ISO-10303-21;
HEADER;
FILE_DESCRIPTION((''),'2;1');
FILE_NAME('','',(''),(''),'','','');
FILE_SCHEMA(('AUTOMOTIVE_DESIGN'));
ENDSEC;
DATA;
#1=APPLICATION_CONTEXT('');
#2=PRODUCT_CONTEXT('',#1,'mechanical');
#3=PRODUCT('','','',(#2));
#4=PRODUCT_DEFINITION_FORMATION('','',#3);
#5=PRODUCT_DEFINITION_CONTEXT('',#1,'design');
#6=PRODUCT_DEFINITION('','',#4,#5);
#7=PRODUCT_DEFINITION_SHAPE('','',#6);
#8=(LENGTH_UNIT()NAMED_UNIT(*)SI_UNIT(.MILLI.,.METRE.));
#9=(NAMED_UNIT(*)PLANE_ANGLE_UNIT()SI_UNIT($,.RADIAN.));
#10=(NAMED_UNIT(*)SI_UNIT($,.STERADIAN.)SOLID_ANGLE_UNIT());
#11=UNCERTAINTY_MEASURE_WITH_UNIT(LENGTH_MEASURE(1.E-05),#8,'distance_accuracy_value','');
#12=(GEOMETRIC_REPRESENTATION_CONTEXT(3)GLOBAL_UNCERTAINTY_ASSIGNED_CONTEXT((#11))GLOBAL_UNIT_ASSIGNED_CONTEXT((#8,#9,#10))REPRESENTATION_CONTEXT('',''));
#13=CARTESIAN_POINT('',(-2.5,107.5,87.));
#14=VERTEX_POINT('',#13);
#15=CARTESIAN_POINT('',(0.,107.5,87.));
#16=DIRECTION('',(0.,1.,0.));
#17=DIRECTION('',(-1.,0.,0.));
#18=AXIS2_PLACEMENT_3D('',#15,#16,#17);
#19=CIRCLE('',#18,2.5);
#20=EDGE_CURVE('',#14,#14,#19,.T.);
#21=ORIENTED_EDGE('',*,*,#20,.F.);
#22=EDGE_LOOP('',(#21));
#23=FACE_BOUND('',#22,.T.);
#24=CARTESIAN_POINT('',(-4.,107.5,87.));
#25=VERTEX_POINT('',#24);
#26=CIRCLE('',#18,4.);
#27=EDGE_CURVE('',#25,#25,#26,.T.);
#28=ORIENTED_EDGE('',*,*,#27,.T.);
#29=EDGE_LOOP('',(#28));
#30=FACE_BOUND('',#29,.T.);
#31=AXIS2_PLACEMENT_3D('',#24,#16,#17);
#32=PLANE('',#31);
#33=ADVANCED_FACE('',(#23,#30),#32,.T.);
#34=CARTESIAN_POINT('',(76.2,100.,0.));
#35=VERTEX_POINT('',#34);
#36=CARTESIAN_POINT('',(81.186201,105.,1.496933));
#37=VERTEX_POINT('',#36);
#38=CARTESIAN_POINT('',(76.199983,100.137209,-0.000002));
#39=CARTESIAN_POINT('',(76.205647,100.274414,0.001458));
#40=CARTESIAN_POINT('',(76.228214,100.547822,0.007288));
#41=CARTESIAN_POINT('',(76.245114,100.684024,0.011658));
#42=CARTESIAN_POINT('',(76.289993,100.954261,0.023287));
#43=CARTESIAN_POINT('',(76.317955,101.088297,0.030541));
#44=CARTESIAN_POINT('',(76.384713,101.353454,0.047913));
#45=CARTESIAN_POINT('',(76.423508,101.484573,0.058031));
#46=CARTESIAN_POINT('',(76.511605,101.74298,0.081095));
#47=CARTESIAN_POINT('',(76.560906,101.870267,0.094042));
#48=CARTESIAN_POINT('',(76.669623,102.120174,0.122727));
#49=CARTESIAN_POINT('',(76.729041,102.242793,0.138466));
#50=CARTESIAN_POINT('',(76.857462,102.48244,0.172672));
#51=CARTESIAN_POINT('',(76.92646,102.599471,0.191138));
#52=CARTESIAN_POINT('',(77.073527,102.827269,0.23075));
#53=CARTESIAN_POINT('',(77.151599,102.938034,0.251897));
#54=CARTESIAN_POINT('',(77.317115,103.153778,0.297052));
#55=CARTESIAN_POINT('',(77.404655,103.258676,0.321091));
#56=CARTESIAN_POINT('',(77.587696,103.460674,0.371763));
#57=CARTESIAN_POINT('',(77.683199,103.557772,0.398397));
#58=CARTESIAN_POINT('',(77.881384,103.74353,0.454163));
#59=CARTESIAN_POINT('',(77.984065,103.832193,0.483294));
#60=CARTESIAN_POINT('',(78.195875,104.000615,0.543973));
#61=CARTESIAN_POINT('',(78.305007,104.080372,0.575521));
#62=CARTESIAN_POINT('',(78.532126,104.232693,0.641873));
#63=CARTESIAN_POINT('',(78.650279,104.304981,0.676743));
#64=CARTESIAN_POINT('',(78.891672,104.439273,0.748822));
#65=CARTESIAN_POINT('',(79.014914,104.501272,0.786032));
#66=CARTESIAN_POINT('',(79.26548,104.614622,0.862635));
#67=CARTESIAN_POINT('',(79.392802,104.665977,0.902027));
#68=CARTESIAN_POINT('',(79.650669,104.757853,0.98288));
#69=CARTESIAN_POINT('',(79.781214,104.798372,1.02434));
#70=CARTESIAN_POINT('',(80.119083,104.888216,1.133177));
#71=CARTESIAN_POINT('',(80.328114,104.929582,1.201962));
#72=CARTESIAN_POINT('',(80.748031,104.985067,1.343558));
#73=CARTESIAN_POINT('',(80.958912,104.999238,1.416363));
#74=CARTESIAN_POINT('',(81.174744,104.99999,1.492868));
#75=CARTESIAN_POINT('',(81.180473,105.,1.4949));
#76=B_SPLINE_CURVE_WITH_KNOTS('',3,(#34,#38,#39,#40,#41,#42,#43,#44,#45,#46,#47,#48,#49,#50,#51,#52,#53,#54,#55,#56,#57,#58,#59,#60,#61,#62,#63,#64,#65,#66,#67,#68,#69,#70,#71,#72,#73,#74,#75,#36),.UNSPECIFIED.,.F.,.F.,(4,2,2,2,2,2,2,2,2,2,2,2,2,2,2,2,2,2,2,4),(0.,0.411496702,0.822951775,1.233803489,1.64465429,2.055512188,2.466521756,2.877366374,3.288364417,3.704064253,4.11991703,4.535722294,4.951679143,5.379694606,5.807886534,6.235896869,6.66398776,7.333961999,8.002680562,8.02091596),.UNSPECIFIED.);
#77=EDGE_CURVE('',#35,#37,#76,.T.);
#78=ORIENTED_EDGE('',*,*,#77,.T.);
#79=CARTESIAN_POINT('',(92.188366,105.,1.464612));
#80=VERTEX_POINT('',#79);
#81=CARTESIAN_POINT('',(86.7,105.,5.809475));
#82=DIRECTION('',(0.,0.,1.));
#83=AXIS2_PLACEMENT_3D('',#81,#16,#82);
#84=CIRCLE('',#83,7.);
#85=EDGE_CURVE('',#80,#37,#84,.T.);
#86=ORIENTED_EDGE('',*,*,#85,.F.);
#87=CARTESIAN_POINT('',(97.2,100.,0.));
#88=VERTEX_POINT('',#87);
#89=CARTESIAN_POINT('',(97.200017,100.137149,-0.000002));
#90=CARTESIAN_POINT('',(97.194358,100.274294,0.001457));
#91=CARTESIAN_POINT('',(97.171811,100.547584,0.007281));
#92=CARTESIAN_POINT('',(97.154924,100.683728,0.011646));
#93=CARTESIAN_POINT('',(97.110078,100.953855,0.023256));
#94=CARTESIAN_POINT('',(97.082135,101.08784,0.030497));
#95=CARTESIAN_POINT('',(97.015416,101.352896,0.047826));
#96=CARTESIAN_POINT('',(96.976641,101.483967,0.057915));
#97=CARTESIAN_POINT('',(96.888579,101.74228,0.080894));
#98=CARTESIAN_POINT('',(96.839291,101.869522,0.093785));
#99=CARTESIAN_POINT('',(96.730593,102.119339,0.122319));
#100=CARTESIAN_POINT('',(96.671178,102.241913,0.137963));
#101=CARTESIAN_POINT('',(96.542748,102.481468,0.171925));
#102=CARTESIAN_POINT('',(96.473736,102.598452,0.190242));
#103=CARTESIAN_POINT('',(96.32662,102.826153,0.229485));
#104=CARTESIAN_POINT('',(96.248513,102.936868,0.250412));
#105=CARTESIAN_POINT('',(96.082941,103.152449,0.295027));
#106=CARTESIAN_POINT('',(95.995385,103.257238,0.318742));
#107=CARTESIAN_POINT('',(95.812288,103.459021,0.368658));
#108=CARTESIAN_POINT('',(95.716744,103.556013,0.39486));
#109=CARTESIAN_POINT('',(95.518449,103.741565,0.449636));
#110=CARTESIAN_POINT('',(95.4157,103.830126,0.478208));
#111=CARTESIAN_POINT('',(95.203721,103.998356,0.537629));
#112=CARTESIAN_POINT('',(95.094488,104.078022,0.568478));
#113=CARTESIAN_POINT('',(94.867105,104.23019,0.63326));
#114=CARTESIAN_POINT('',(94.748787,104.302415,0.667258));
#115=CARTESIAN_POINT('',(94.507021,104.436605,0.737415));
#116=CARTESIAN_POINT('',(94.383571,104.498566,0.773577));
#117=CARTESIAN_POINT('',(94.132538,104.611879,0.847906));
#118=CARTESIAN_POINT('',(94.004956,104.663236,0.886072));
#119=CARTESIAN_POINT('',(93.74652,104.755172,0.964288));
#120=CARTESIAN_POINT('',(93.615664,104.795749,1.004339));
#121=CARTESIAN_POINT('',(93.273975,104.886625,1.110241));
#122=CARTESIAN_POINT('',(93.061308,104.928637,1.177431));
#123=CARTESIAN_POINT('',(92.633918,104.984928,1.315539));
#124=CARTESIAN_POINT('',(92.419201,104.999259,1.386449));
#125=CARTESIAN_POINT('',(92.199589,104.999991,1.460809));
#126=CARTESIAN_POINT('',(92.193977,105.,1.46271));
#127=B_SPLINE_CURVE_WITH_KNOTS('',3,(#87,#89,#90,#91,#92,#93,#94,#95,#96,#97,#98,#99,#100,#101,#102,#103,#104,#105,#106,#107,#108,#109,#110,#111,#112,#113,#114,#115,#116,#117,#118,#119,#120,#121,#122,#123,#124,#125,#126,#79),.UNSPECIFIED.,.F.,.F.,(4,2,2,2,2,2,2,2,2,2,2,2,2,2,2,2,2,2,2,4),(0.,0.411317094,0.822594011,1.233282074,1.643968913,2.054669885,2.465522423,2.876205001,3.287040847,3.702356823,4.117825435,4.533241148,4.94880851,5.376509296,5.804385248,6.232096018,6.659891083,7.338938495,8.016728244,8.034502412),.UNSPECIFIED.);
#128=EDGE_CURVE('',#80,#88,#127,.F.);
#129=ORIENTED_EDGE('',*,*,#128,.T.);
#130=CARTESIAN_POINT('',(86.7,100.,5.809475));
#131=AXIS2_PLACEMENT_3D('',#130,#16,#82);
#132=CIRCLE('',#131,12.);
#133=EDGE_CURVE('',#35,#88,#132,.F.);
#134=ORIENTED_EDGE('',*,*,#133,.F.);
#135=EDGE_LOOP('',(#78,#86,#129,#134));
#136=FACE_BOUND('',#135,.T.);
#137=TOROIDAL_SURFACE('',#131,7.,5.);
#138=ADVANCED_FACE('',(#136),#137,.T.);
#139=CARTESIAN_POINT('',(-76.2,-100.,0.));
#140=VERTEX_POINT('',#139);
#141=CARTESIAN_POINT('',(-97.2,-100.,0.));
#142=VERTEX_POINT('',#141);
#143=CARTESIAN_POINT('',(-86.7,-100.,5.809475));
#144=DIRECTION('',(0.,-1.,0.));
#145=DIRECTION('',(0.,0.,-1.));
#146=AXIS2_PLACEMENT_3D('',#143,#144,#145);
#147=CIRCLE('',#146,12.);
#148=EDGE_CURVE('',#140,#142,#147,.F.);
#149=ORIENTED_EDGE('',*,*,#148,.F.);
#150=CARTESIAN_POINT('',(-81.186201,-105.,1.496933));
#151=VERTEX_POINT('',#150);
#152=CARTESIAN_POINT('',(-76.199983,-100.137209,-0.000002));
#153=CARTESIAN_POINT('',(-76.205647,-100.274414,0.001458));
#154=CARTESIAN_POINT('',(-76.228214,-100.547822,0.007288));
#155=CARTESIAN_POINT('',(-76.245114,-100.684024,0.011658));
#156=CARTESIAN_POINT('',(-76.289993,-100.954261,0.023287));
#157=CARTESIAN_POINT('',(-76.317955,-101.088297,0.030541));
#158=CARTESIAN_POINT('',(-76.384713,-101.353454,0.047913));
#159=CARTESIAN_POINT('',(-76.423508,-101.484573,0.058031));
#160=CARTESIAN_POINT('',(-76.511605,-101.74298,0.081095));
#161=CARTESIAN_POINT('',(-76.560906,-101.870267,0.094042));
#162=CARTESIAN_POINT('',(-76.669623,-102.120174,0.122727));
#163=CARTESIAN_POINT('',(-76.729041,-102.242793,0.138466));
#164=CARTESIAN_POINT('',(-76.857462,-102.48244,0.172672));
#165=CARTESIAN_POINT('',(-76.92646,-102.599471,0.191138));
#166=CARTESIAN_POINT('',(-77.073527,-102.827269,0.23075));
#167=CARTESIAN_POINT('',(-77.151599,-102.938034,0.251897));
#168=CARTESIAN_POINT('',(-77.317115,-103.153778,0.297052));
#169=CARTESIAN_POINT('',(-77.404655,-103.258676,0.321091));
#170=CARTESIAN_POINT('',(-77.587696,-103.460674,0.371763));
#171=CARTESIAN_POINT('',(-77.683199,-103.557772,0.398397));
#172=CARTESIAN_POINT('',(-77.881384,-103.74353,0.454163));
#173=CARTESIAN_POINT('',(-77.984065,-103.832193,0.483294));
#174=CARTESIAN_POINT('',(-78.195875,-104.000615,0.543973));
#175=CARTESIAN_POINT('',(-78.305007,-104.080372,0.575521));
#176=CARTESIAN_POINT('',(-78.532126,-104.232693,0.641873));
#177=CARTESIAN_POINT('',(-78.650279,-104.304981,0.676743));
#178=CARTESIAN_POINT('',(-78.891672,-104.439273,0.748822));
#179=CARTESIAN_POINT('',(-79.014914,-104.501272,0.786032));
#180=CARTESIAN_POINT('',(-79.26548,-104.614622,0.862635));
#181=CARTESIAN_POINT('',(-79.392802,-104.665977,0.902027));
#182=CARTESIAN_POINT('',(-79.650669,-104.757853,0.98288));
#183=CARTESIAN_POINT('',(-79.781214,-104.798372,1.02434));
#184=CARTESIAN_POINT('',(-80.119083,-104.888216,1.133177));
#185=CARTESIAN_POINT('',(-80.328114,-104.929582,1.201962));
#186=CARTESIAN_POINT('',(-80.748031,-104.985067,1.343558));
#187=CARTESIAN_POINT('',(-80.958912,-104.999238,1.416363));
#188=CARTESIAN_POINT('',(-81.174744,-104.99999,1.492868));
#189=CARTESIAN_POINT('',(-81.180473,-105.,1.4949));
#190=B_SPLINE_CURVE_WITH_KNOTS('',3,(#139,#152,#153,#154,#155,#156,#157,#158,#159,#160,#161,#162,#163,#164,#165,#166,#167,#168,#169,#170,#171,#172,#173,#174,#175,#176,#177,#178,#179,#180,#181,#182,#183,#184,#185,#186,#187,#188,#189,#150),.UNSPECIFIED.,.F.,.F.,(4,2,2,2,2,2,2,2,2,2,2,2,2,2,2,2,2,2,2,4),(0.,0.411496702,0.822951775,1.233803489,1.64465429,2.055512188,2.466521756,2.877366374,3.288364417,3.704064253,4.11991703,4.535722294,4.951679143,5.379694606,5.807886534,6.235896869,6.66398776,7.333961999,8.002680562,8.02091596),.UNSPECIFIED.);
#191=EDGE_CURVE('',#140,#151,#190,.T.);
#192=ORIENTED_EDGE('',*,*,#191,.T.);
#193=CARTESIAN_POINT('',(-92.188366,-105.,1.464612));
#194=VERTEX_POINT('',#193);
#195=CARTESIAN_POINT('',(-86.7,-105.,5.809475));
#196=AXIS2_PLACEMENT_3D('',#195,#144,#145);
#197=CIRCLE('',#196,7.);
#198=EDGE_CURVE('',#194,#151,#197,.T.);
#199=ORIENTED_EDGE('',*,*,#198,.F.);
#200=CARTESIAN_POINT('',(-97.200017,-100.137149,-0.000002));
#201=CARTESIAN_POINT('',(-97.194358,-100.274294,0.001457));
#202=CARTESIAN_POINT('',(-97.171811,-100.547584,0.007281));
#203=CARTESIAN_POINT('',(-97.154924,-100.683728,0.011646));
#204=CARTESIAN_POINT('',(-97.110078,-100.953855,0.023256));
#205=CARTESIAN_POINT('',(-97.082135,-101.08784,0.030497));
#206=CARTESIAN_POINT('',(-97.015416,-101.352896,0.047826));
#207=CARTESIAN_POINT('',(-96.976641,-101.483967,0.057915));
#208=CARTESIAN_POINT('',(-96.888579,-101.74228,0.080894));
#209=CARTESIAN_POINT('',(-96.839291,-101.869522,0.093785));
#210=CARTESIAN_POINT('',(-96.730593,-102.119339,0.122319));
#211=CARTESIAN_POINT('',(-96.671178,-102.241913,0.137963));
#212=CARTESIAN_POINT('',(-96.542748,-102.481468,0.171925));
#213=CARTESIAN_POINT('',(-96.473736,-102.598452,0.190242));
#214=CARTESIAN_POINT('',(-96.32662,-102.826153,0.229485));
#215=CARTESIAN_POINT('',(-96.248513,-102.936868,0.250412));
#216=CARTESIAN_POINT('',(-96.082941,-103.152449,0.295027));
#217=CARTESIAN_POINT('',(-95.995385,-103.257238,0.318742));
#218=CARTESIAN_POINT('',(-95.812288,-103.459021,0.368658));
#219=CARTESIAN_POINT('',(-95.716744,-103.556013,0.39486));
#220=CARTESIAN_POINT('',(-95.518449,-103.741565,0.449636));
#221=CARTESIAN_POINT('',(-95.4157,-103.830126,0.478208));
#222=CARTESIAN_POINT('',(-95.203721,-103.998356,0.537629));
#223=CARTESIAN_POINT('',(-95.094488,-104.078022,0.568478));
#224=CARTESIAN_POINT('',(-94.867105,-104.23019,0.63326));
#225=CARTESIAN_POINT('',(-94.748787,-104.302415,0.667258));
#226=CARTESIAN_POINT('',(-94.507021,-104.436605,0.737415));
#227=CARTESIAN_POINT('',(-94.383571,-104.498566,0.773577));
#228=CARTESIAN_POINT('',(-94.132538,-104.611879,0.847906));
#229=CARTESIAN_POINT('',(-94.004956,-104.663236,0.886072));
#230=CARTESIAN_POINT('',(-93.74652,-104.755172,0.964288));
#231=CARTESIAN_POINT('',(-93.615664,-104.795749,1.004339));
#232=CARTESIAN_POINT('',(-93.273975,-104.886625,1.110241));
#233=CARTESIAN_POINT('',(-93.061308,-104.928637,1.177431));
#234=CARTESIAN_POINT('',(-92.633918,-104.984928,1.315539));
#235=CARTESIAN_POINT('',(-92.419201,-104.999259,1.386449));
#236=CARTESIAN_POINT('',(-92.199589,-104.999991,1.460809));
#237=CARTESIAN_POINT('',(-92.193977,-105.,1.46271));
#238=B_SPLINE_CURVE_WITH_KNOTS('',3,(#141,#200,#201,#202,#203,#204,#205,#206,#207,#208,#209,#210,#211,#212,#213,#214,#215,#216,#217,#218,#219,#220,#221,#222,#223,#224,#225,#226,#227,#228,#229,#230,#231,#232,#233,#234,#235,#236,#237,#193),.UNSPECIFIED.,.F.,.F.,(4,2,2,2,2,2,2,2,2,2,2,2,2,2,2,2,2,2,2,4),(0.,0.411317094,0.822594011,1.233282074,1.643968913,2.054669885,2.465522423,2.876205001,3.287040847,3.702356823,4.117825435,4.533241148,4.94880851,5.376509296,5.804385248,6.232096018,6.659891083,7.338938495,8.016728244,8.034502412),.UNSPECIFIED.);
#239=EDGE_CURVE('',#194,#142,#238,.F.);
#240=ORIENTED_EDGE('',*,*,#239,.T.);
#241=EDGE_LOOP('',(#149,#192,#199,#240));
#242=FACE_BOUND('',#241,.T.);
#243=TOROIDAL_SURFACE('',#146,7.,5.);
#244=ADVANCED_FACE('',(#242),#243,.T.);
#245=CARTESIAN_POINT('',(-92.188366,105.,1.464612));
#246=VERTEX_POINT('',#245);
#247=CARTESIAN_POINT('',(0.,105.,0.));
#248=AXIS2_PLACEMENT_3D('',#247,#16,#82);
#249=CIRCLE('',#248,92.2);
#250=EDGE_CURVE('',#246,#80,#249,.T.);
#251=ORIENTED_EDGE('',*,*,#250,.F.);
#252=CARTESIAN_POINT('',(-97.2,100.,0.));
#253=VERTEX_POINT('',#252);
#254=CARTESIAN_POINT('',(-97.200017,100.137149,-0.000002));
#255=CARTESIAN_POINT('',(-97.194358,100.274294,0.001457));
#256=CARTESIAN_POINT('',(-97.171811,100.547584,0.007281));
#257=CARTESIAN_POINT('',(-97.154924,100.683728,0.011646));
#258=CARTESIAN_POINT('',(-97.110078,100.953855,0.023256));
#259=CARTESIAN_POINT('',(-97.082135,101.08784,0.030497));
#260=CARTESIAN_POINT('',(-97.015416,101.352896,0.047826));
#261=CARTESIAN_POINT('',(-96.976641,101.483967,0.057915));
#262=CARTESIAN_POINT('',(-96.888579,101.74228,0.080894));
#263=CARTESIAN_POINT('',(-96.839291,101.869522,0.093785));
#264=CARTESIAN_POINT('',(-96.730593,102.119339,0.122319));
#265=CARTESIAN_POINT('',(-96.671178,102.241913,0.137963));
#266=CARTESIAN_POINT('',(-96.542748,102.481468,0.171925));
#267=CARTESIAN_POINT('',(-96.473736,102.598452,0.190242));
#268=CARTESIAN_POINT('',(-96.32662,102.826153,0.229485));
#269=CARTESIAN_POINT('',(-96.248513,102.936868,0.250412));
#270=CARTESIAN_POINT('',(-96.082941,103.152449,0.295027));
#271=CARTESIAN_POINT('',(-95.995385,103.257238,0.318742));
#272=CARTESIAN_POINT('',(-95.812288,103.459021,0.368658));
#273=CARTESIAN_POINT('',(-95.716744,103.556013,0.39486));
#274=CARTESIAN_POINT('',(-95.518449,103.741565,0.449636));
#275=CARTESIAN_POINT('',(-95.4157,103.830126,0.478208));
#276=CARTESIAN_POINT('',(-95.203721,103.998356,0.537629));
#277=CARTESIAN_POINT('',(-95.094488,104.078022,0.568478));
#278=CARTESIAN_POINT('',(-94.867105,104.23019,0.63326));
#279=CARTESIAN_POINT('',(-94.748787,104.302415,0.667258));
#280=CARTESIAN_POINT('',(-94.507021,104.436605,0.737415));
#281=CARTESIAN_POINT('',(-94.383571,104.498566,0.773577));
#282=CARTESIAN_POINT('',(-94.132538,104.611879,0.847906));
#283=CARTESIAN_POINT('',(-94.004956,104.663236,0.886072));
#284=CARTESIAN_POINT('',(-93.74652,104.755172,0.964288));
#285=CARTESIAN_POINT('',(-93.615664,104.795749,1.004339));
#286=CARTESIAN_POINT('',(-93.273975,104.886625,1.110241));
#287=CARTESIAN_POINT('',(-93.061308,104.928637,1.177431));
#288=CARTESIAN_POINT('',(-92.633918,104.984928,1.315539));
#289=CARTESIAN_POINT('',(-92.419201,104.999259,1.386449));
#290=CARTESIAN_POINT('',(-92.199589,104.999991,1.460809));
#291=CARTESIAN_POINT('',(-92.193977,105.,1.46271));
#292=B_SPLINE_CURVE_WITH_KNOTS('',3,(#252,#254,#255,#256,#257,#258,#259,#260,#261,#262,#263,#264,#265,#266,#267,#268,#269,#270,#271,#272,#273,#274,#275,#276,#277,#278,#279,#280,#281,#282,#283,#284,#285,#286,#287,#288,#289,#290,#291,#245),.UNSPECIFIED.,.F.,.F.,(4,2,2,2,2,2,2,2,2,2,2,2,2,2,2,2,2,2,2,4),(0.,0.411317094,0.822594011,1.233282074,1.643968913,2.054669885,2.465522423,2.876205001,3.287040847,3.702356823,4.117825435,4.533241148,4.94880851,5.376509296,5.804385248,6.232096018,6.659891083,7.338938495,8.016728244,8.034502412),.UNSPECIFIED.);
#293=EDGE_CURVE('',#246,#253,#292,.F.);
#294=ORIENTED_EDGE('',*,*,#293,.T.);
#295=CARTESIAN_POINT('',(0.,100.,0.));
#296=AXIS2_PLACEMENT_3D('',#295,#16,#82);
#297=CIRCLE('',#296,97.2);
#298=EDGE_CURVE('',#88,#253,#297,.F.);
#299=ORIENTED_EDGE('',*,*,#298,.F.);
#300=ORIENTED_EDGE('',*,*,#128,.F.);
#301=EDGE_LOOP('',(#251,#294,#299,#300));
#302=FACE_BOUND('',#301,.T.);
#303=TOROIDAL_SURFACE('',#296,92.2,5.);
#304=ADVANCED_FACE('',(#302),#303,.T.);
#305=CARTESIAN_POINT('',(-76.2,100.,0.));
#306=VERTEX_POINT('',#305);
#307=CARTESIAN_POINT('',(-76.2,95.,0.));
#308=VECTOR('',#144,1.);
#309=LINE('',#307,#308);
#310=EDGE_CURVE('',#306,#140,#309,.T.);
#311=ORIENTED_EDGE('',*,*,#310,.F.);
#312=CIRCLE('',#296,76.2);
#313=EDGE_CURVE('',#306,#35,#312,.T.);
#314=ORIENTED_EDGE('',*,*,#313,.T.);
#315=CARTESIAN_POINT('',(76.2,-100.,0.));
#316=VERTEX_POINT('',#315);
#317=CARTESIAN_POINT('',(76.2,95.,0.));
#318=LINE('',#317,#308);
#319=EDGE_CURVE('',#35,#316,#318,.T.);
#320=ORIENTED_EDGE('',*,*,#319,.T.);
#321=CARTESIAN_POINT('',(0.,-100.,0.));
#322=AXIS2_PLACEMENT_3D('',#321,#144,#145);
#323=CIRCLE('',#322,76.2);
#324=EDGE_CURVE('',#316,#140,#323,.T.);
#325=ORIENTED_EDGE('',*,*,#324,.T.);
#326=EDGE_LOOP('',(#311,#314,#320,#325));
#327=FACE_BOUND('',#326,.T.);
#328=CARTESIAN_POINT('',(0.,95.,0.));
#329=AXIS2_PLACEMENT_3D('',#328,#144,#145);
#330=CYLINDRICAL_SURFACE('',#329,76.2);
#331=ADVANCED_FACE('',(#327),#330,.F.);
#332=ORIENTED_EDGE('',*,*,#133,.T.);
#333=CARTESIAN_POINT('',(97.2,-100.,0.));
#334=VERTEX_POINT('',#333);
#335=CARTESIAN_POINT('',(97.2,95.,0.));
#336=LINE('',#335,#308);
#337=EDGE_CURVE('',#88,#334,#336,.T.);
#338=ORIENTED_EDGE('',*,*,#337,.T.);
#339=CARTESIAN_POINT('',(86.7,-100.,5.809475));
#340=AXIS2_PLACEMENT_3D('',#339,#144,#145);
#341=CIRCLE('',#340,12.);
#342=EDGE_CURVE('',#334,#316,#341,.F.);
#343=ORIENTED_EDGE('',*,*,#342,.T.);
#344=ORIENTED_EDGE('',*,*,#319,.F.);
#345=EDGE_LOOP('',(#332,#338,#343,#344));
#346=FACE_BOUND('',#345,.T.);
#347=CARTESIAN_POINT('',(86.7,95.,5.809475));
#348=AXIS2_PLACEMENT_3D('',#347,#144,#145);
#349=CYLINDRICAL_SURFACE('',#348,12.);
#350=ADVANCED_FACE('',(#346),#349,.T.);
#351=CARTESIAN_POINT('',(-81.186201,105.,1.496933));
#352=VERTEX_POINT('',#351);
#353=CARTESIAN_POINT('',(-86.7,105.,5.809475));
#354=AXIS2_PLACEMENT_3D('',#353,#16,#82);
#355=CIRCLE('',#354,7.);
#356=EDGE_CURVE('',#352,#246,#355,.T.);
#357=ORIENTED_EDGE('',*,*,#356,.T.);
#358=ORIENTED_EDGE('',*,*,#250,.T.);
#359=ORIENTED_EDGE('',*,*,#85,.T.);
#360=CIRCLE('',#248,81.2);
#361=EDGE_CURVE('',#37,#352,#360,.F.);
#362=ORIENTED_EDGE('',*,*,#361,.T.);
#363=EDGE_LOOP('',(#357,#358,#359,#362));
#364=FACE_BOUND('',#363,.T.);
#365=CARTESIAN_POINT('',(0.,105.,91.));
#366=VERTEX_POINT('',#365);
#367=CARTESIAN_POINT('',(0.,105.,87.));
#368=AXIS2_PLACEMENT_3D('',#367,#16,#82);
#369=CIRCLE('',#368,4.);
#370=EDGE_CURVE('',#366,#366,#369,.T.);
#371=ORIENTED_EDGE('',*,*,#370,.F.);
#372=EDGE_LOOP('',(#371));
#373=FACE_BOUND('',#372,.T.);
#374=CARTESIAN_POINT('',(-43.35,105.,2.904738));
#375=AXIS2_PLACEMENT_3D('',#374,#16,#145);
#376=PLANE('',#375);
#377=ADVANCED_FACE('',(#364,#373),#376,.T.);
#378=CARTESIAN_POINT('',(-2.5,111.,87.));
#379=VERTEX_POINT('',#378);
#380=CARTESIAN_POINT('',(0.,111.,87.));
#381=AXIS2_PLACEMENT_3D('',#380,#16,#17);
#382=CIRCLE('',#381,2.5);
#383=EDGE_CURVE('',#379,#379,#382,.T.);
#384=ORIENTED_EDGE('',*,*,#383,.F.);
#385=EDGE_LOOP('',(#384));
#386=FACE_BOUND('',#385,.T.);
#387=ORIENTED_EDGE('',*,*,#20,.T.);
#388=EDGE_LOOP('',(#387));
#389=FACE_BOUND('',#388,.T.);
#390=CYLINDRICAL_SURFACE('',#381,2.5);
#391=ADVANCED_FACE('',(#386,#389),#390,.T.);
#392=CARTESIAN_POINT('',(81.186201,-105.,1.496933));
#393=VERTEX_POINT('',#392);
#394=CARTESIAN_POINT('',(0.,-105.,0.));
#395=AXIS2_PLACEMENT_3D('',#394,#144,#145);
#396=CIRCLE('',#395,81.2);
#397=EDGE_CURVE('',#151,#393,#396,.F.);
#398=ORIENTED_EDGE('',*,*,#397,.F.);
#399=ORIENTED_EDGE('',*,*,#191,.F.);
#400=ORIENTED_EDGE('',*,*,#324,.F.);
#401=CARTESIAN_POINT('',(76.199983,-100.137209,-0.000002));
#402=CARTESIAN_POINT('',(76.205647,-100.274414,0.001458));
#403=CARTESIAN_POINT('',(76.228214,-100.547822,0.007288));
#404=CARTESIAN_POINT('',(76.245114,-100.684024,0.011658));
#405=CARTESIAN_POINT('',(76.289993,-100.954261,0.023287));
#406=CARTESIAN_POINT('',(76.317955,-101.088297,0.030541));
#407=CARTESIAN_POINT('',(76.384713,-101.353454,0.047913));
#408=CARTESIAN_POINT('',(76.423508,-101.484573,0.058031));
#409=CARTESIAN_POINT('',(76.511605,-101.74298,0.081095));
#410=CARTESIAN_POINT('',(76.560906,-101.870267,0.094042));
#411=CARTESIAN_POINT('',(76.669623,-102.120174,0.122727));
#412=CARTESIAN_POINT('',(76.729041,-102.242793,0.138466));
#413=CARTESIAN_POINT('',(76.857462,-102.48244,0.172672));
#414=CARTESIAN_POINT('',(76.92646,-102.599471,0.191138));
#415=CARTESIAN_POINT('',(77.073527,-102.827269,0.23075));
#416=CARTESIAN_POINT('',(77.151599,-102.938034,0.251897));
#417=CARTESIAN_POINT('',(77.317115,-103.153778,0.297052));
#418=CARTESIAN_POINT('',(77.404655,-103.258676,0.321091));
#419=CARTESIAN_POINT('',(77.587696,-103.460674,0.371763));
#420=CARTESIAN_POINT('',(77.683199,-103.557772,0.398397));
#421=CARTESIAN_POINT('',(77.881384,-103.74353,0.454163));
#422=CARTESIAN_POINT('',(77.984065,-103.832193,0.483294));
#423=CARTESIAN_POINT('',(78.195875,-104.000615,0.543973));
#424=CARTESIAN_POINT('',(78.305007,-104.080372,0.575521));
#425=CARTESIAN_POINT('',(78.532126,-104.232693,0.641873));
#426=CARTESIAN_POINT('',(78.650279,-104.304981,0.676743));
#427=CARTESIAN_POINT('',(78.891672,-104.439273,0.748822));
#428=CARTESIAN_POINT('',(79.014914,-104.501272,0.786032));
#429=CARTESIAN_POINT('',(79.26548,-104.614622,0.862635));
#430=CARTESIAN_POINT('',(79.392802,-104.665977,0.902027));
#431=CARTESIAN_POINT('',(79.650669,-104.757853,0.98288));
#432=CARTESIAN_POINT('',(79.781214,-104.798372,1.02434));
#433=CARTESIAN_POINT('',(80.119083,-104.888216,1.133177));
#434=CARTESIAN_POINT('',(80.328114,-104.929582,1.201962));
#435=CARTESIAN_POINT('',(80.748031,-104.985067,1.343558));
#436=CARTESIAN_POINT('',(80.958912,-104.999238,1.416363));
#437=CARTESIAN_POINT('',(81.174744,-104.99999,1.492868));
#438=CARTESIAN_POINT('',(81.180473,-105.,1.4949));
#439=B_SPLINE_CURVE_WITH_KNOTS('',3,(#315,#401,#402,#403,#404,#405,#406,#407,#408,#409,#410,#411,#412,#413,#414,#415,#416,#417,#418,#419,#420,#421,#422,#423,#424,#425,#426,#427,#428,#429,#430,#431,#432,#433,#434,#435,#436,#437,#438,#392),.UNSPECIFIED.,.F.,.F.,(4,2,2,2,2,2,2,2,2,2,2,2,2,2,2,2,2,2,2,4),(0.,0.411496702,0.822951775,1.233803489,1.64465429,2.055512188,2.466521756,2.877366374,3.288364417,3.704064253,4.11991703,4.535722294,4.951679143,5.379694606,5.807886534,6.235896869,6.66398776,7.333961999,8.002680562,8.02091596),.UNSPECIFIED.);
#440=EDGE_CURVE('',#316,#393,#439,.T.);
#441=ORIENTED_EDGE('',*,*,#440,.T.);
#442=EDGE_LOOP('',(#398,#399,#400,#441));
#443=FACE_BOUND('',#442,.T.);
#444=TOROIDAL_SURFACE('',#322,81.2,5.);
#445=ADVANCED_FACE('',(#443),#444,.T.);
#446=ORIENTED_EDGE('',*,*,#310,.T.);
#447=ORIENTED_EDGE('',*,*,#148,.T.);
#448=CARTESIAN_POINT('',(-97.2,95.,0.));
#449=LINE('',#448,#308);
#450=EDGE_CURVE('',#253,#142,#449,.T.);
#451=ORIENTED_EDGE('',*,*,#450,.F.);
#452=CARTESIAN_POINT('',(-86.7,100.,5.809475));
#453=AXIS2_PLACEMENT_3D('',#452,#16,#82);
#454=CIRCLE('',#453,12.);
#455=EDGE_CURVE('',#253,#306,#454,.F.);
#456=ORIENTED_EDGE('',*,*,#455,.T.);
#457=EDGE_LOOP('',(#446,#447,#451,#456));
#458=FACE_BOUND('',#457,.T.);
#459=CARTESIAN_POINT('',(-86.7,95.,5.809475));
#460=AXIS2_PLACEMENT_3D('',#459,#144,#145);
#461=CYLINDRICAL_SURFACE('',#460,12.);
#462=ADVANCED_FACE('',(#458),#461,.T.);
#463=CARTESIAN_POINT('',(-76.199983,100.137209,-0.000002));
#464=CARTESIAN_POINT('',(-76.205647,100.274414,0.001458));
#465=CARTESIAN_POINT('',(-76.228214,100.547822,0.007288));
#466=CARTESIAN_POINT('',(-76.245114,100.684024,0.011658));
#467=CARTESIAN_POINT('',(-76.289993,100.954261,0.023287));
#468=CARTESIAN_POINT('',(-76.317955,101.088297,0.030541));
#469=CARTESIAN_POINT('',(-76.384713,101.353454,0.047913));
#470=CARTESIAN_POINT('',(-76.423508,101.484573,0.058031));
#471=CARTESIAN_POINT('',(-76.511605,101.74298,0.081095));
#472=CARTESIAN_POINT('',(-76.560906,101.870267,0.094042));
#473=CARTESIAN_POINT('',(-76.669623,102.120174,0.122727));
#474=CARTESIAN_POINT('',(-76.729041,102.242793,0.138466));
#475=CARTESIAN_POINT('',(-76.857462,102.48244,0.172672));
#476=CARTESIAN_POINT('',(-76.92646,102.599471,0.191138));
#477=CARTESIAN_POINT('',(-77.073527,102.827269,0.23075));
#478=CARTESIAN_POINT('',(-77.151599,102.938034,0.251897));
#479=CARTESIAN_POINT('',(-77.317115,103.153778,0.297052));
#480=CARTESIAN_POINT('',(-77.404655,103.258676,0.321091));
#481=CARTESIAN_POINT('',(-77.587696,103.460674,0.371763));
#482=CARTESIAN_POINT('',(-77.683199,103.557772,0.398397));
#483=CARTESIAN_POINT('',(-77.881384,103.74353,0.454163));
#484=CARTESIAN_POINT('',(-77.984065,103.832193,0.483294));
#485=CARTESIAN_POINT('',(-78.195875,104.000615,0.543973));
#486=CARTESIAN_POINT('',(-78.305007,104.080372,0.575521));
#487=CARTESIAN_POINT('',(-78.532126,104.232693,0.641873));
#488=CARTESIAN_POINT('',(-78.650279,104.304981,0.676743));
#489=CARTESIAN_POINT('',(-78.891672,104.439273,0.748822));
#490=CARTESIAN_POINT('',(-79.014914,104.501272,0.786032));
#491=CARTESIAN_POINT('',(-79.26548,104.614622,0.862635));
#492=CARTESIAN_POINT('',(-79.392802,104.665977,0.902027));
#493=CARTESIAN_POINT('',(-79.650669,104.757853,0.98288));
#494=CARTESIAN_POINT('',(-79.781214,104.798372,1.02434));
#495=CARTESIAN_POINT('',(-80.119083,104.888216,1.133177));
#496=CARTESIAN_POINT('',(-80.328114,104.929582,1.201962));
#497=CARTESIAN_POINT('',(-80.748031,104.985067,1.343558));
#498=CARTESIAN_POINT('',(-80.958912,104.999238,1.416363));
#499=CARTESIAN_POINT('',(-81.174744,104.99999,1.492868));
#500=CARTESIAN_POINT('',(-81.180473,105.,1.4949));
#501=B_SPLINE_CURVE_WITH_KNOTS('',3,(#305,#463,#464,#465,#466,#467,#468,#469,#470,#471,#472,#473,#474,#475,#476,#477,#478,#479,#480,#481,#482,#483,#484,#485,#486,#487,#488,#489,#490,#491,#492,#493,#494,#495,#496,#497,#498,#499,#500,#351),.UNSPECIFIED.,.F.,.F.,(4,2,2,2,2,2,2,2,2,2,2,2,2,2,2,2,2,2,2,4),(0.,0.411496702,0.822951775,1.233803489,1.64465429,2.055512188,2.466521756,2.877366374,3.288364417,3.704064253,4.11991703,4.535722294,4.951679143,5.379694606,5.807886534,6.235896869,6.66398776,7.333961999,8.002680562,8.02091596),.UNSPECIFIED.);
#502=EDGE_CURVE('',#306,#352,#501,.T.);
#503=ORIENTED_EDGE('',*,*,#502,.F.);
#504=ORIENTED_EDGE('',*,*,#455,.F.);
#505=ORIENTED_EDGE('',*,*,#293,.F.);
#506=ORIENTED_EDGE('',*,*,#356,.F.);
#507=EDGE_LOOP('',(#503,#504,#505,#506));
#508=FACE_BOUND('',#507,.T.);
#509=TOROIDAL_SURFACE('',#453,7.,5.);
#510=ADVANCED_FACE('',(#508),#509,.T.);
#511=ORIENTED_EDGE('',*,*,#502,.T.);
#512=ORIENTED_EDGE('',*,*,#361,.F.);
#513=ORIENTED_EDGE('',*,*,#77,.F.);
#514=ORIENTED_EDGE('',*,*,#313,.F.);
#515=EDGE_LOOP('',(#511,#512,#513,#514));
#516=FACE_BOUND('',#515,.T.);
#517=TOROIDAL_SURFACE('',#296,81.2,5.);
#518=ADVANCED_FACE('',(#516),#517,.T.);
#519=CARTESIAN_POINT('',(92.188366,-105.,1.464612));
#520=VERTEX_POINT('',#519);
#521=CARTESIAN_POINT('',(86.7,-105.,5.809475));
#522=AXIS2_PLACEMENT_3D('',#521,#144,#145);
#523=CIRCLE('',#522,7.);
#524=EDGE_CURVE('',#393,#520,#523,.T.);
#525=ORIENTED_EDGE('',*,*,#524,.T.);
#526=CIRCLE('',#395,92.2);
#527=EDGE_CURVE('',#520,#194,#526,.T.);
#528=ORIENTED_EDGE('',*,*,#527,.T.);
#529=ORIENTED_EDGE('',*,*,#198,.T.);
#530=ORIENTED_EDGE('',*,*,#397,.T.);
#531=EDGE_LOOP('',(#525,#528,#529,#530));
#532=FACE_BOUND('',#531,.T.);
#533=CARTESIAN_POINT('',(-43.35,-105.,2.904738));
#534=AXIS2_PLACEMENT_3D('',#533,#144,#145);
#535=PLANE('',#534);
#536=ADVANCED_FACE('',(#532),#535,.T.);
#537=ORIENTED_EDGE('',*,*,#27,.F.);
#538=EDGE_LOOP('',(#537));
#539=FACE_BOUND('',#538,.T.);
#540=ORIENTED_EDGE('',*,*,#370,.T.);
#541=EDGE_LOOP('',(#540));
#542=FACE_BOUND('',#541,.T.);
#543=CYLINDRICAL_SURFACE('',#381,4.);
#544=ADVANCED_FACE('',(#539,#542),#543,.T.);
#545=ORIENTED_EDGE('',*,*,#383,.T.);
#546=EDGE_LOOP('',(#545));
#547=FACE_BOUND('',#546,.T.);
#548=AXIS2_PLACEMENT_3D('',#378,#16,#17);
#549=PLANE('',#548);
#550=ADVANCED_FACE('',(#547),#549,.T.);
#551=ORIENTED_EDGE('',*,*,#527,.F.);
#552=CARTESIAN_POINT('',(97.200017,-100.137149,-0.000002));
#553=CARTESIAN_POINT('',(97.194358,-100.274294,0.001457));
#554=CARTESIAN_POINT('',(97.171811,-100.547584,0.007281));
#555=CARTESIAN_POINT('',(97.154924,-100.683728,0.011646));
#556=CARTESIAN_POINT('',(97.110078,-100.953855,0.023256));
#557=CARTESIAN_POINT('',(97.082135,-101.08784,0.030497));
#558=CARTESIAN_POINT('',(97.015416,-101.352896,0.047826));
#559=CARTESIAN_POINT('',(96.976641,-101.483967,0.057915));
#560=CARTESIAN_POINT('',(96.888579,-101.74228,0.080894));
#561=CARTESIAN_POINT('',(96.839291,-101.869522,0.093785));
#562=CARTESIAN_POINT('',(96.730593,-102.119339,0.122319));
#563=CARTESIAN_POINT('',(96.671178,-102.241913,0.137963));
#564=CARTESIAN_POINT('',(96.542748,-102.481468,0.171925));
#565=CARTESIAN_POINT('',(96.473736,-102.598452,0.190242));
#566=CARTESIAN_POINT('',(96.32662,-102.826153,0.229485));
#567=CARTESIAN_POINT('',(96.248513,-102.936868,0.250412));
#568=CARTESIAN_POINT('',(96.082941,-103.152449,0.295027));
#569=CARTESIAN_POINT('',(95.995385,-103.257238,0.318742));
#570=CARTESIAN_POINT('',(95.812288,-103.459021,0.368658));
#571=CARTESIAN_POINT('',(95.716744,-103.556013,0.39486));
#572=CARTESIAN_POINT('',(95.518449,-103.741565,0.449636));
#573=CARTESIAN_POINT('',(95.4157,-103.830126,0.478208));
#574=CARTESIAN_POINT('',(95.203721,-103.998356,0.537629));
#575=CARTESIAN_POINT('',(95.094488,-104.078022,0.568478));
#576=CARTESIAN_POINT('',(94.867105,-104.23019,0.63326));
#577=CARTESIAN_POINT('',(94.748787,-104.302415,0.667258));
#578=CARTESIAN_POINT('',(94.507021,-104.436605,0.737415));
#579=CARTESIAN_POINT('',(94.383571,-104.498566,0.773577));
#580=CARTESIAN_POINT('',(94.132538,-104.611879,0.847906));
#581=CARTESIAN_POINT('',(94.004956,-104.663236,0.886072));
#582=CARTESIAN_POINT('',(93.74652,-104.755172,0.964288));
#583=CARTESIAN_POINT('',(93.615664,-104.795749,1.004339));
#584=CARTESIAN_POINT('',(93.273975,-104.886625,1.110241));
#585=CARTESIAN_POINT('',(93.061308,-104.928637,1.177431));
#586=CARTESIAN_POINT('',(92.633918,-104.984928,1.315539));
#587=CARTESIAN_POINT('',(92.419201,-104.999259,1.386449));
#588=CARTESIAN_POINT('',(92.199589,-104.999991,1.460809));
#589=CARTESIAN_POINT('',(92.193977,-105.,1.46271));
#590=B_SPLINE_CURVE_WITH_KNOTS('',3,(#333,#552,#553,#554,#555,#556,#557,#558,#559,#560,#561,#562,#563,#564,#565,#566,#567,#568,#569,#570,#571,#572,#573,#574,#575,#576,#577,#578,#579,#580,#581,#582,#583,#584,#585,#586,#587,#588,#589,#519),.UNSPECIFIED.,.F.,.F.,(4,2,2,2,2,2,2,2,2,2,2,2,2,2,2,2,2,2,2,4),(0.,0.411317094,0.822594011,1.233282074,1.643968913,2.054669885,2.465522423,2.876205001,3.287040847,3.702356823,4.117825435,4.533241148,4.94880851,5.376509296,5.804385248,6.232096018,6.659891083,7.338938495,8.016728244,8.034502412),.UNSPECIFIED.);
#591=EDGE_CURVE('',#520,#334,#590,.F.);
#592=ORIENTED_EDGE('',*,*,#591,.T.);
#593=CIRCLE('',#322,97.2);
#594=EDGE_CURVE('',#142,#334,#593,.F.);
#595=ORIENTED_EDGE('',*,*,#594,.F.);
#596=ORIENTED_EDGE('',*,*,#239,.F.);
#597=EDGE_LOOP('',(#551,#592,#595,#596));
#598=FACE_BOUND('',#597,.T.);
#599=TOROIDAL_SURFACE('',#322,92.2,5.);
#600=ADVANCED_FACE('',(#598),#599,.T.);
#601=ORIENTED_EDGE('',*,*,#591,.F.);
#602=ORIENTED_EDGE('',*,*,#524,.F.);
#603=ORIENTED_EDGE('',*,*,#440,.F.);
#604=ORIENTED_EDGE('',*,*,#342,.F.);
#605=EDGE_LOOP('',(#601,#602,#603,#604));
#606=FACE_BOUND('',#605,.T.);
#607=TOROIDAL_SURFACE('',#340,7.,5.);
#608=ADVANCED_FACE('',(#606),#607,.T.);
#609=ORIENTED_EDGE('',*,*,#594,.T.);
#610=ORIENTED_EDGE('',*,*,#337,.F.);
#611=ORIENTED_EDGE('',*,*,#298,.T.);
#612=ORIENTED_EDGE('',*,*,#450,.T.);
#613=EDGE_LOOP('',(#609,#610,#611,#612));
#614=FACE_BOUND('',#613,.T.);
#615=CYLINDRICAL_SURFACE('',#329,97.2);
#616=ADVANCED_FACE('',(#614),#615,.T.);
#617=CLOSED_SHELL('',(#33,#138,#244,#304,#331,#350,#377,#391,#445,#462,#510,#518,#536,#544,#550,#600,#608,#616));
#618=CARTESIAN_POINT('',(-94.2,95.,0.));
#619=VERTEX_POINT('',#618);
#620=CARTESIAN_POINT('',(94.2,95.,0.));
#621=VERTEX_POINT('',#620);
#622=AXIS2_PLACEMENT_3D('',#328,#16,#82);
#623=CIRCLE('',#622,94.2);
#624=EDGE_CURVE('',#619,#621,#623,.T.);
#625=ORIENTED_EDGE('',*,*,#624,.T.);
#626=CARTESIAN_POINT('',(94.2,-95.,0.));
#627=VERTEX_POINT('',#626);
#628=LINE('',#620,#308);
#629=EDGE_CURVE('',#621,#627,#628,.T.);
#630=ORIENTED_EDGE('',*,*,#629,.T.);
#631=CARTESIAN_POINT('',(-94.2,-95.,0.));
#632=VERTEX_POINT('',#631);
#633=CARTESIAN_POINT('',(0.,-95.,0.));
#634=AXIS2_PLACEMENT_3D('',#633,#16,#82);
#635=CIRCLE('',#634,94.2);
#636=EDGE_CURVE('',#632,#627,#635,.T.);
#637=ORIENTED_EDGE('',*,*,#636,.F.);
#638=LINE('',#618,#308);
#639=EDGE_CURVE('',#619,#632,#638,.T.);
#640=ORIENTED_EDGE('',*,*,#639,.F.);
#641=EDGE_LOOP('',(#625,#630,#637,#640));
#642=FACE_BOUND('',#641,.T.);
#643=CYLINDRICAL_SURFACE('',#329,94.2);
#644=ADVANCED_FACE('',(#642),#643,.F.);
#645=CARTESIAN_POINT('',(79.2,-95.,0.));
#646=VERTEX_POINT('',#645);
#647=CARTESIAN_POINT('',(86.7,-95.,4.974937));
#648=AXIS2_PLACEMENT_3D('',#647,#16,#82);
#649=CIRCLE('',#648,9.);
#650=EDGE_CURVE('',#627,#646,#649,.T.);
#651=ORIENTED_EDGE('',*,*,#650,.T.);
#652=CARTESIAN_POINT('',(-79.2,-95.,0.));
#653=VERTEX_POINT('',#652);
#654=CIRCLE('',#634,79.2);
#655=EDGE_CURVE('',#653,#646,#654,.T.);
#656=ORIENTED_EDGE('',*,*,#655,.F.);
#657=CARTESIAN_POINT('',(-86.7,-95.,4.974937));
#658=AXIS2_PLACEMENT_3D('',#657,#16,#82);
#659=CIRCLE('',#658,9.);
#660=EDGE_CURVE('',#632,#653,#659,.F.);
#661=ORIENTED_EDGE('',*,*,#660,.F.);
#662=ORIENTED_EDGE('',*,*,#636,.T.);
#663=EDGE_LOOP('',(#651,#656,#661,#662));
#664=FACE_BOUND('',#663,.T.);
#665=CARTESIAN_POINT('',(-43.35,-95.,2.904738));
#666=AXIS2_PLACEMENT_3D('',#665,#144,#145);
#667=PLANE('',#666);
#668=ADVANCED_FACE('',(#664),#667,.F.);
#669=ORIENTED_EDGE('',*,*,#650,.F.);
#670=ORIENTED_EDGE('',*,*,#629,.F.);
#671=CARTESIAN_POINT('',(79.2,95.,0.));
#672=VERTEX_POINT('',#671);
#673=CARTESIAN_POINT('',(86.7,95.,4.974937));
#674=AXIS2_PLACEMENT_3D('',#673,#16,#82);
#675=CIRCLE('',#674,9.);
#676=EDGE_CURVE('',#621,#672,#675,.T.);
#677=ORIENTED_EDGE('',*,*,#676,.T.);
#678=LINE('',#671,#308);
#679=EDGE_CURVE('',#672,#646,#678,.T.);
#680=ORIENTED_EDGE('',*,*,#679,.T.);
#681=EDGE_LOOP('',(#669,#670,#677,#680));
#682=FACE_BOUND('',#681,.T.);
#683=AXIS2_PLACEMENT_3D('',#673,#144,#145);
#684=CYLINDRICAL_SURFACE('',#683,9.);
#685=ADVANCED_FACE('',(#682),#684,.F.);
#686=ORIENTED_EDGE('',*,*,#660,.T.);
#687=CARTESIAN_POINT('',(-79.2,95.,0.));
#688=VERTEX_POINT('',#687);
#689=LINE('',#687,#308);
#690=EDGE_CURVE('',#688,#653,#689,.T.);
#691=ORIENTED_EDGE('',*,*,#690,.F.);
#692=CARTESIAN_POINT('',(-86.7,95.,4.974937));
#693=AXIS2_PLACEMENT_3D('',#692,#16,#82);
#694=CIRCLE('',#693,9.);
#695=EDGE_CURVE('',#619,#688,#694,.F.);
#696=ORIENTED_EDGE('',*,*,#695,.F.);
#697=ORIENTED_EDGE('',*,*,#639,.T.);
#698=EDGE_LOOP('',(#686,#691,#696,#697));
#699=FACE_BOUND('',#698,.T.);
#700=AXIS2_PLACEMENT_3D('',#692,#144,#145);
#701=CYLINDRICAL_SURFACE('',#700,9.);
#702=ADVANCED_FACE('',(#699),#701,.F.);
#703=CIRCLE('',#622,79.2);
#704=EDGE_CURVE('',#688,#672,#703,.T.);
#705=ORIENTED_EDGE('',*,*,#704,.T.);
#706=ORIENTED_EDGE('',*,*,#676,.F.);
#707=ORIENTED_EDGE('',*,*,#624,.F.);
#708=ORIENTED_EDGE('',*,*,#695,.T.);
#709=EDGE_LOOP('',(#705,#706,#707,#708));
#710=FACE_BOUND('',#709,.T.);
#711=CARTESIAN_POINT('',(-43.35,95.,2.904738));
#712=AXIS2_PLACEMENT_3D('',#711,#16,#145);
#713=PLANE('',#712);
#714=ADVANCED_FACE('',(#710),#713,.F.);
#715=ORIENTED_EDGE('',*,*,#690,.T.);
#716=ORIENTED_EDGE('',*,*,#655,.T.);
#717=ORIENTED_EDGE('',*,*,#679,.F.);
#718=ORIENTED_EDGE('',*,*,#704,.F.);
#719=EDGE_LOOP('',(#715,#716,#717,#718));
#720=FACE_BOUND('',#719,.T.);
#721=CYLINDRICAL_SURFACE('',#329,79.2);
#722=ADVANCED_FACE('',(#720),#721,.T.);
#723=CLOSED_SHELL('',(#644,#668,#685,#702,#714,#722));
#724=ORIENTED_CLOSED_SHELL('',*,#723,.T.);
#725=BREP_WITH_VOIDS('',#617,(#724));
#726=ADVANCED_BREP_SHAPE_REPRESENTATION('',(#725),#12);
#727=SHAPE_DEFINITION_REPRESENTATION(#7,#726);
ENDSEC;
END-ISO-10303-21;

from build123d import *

# Parameters (mm, degrees)
BOSS_EXTRUDE1_DEPTH  = 95
BOSS_EXTRUDE2_DEPTH  = 10
FILLET2_R            = 5
FILLET2_OF_MIRROR1_R = 5


with BuildPart() as part:
    # Sketch1 → Boss-Extrude1 (new, symmetric)
    with BuildSketch(Plane(origin=(0, 0, 0), x_dir=(1, 0, 0), z_dir=(0, 1, 0))):
        with BuildLine():
            ThreePointArc((-76.2, 0), (0, -76.2), (76.2, 0))
            ThreePointArc((76.2, 0), (86.7, 6.190524981), (97.2, 0))
            ThreePointArc((97.2, 0), (0, -97.2), (-97.2, 0))
            ThreePointArc((-97.2, 0), (-86.7, 6.190524981), (-76.2, 0))
        make_face()
        with BuildLine():
            ThreePointArc((-79.2, 0), (0, -79.2), (79.2, 0))
            ThreePointArc((79.2, 0), (86.7, 4.025062814), (94.2, 0))
            ThreePointArc((94.2, 0), (0, -94.2), (-94.2, 0))
            ThreePointArc((-94.2, 0), (-86.7, 4.025062814), (-79.2, 0))
        make_face(mode=Mode.SUBTRACT)
    extrude(amount=BOSS_EXTRUDE1_DEPTH, both=True)

    # Sketch6 → Boss-Extrude2 (add)
    with BuildSketch(Plane.XZ.offset(95)):
        with BuildLine():
            ThreePointArc((76.2, 0), (86.7, -6.190524981), (97.2, 0))
            ThreePointArc((97.2, 0), (0, 97.2), (-97.2, 0))
            ThreePointArc((-97.2, 0), (-86.7, -6.190524981), (-76.2, 0))
            ThreePointArc((-76.2, 0), (0, 76.2), (76.2, 0))
        make_face()
    boss_extrude2 = extrude(amount=BOSS_EXTRUDE2_DEPTH)

    # Fillet2
    # the kernel refuses this fillet: 5 mm, written as the material it takes off along each edge
    with BuildSketch(Plane(origin=(0, -105, 0), x_dir=(-0.9978410654682823, 0, -0.06567501857725805), z_dir=(0.06567501857725805, 0, -0.9978410654682823))) as fillet2_piece_1:
        with BuildLine():
            CenterArc((76.2 + FILLET2_R, FILLET2_R), FILLET2_R, 180, 90)
            Line((76.2 + FILLET2_R, 0), (76.2 + FILLET2_R, -FILLET2_R * 0.02))
            Line((76.2 + FILLET2_R, -FILLET2_R * 0.02), (76.2 - FILLET2_R * 0.02, -FILLET2_R * 0.02))
            Line((76.2 - FILLET2_R * 0.02, -FILLET2_R * 0.02), (76.2 - FILLET2_R * 0.02, FILLET2_R))
            Line((76.2 - FILLET2_R * 0.02, FILLET2_R), (76.2, FILLET2_R))
        make_face()
    revolve(axis=Axis((0, -105, 0), (0, 1, 0)), revolution_arc=187.531223354, mode=Mode.SUBTRACT)
    with BuildSketch(Plane(origin=(86.7, -105, 5.809475019), x_dir=(-0.9960965214021965, 0, -0.08827072023294943), z_dir=(-0.08827072023294943, 0, 0.9960965214021965))) as fillet2_piece_2:
        with BuildLine():
            CenterArc((12 - FILLET2_R, -FILLET2_R), FILLET2_R, 0, 90)
            Line((12 - FILLET2_R, 0), (12 - FILLET2_R, FILLET2_R * 0.02))
            Line((12 - FILLET2_R, FILLET2_R * 0.02), (12 + FILLET2_R * 0.02, FILLET2_R * 0.02))
            Line((12 + FILLET2_R * 0.02, FILLET2_R * 0.02), (12 + FILLET2_R * 0.02, -FILLET2_R))
            Line((12 + FILLET2_R * 0.02, -FILLET2_R), (12, -FILLET2_R))
        make_face()
    revolve(axis=Axis((86.7, -105, 5.809475019), (0, -1, 0)), revolution_arc=169.871738636, mode=Mode.SUBTRACT)
    with BuildSketch(Plane(origin=(0, -105, 0), x_dir=(0.9986729810025154, 0, -0.05150026228622047), z_dir=(-0.05150026228622047, 0, -0.9986729810025154))) as fillet2_piece_3:
        with BuildLine():
            CenterArc((97.2 - FILLET2_R, -FILLET2_R), FILLET2_R, 0, 90)
            Line((97.2, -FILLET2_R), (97.2 + FILLET2_R * 0.02, -FILLET2_R))
            Line((97.2 + FILLET2_R * 0.02, -FILLET2_R), (97.2 + FILLET2_R * 0.02, FILLET2_R * 0.02))
            Line((97.2 + FILLET2_R * 0.02, FILLET2_R * 0.02), (97.2 - FILLET2_R, FILLET2_R * 0.02))
            Line((97.2 - FILLET2_R, FILLET2_R * 0.02), (97.2 - FILLET2_R, 0))
        make_face()
    revolve(axis=Axis((0, -105, 0), (0, -1, 0)), revolution_arc=185.904107198, mode=Mode.SUBTRACT)
    with BuildSketch(Plane(origin=(-86.7, -105, 5.809475019), x_dir=(-0.9960965214021962, 0, -0.08827072023295163), z_dir=(-0.08827072023295163, 0, 0.9960965214021962))) as fillet2_piece_4:
        with BuildLine():
            CenterArc((12 - FILLET2_R, -FILLET2_R), FILLET2_R, 0, 90)
            Line((12 - FILLET2_R, 0), (12 - FILLET2_R, FILLET2_R * 0.02))
            Line((12 - FILLET2_R, FILLET2_R * 0.02), (12 + FILLET2_R * 0.02, FILLET2_R * 0.02))
            Line((12 + FILLET2_R * 0.02, FILLET2_R * 0.02), (12 + FILLET2_R * 0.02, -FILLET2_R))
            Line((12 + FILLET2_R * 0.02, -FILLET2_R), (12, -FILLET2_R))
        make_face()
    revolve(axis=Axis((-86.7, -105, 5.809475019), (0, -1, 0)), revolution_arc=169.871738636, mode=Mode.SUBTRACT)

    # Mirror1: Boss-Extrude2 across plane
    add(boss_extrude2.mirror(Plane.ZX))

    # Fillet2 of Mirror1
    # the kernel refuses this fillet: 5 mm, written as the material it takes off along each edge
    with BuildSketch(Plane(origin=(0, 105, 0), x_dir=(-0.9978410654682823, 0, -0.06567501857725805), z_dir=(0.06567501857725805, 0, -0.9978410654682823))) as fillet2_of_mirror1_piece_1:
        with BuildLine():
            CenterArc((76.2 + FILLET2_OF_MIRROR1_R, -FILLET2_OF_MIRROR1_R), FILLET2_OF_MIRROR1_R, 90, 90)
            Line((76.2, -FILLET2_OF_MIRROR1_R), (76.2 - FILLET2_OF_MIRROR1_R * 0.02, -FILLET2_OF_MIRROR1_R))
            Line((76.2 - FILLET2_OF_MIRROR1_R * 0.02, -FILLET2_OF_MIRROR1_R), (76.2 - FILLET2_OF_MIRROR1_R * 0.02, FILLET2_OF_MIRROR1_R * 0.02))
            Line((76.2 - FILLET2_OF_MIRROR1_R * 0.02, FILLET2_OF_MIRROR1_R * 0.02), (76.2 + FILLET2_OF_MIRROR1_R, FILLET2_OF_MIRROR1_R * 0.02))
            Line((76.2 + FILLET2_OF_MIRROR1_R, FILLET2_OF_MIRROR1_R * 0.02), (76.2 + FILLET2_OF_MIRROR1_R, 0))
        make_face()
    revolve(axis=Axis((0, 105, 0), (0, 1, 0)), revolution_arc=187.531223354, mode=Mode.SUBTRACT)
    with BuildSketch(Plane(origin=(86.7, 105, 5.809475019), x_dir=(-0.9960965214021965, 0, -0.08827072023294943), z_dir=(-0.08827072023294943, 0, 0.9960965214021965))) as fillet2_of_mirror1_piece_2:
        with BuildLine():
            CenterArc((12 - FILLET2_OF_MIRROR1_R, FILLET2_OF_MIRROR1_R), FILLET2_OF_MIRROR1_R, 270, 90)
            Line((12, FILLET2_OF_MIRROR1_R), (12 + FILLET2_OF_MIRROR1_R * 0.02, FILLET2_OF_MIRROR1_R))
            Line((12 + FILLET2_OF_MIRROR1_R * 0.02, FILLET2_OF_MIRROR1_R), (12 + FILLET2_OF_MIRROR1_R * 0.02, -FILLET2_OF_MIRROR1_R * 0.02))
            Line((12 + FILLET2_OF_MIRROR1_R * 0.02, -FILLET2_OF_MIRROR1_R * 0.02), (12 - FILLET2_OF_MIRROR1_R, -FILLET2_OF_MIRROR1_R * 0.02))
            Line((12 - FILLET2_OF_MIRROR1_R, -FILLET2_OF_MIRROR1_R * 0.02), (12 - FILLET2_OF_MIRROR1_R, 0))
        make_face()
    revolve(axis=Axis((86.7, 105, 5.809475019), (0, -1, 0)), revolution_arc=169.871738636, mode=Mode.SUBTRACT)
    with BuildSketch(Plane(origin=(0, 105, 0), x_dir=(0.9986729810025154, 0, -0.05150026228622047), z_dir=(-0.05150026228622047, 0, -0.9986729810025154))) as fillet2_of_mirror1_piece_3:
        with BuildLine():
            CenterArc((97.2 - FILLET2_OF_MIRROR1_R, FILLET2_OF_MIRROR1_R), FILLET2_OF_MIRROR1_R, 270, 90)
            Line((97.2, FILLET2_OF_MIRROR1_R), (97.2 + FILLET2_OF_MIRROR1_R * 0.02, FILLET2_OF_MIRROR1_R))
            Line((97.2 + FILLET2_OF_MIRROR1_R * 0.02, FILLET2_OF_MIRROR1_R), (97.2 + FILLET2_OF_MIRROR1_R * 0.02, -FILLET2_OF_MIRROR1_R * 0.02))
            Line((97.2 + FILLET2_OF_MIRROR1_R * 0.02, -FILLET2_OF_MIRROR1_R * 0.02), (97.2 - FILLET2_OF_MIRROR1_R, -FILLET2_OF_MIRROR1_R * 0.02))
            Line((97.2 - FILLET2_OF_MIRROR1_R, -FILLET2_OF_MIRROR1_R * 0.02), (97.2 - FILLET2_OF_MIRROR1_R, 0))
        make_face()
    revolve(axis=Axis((0, 105, 0), (0, -1, 0)), revolution_arc=185.904107198, mode=Mode.SUBTRACT)
    with BuildSketch(Plane(origin=(-86.7, 105, 5.809475019), x_dir=(-0.9960965214021962, 0, -0.08827072023295163), z_dir=(-0.08827072023295163, 0, 0.9960965214021962))) as fillet2_of_mirror1_piece_4:
        with BuildLine():
            CenterArc((12 - FILLET2_OF_MIRROR1_R, FILLET2_OF_MIRROR1_R), FILLET2_OF_MIRROR1_R, 270, 90)
            Line((12 - FILLET2_OF_MIRROR1_R, 0), (12 - FILLET2_OF_MIRROR1_R, -FILLET2_OF_MIRROR1_R * 0.02))
            Line((12 - FILLET2_OF_MIRROR1_R, -FILLET2_OF_MIRROR1_R * 0.02), (12 + FILLET2_OF_MIRROR1_R * 0.02, -FILLET2_OF_MIRROR1_R * 0.02))
            Line((12 + FILLET2_OF_MIRROR1_R * 0.02, -FILLET2_OF_MIRROR1_R * 0.02), (12 + FILLET2_OF_MIRROR1_R * 0.02, FILLET2_OF_MIRROR1_R))
            Line((12 + FILLET2_OF_MIRROR1_R * 0.02, FILLET2_OF_MIRROR1_R), (12, FILLET2_OF_MIRROR1_R))
        make_face()
    revolve(axis=Axis((-86.7, 105, 5.809475019), (0, -1, 0)), revolution_arc=169.871738636, mode=Mode.SUBTRACT)

    # Sketch9 → Revolve1 (revolve)
    with BuildSketch(Plane.XY.offset(87)):
        Polygon((-4, 105), (-4, 107.5), (-2.5, 107.5), (-2.5, 111), (0, 111), (0, 105), align=None)
    revolve(axis=Axis((0, 111, 87), (0, -1, 0)))


solid = part.part
